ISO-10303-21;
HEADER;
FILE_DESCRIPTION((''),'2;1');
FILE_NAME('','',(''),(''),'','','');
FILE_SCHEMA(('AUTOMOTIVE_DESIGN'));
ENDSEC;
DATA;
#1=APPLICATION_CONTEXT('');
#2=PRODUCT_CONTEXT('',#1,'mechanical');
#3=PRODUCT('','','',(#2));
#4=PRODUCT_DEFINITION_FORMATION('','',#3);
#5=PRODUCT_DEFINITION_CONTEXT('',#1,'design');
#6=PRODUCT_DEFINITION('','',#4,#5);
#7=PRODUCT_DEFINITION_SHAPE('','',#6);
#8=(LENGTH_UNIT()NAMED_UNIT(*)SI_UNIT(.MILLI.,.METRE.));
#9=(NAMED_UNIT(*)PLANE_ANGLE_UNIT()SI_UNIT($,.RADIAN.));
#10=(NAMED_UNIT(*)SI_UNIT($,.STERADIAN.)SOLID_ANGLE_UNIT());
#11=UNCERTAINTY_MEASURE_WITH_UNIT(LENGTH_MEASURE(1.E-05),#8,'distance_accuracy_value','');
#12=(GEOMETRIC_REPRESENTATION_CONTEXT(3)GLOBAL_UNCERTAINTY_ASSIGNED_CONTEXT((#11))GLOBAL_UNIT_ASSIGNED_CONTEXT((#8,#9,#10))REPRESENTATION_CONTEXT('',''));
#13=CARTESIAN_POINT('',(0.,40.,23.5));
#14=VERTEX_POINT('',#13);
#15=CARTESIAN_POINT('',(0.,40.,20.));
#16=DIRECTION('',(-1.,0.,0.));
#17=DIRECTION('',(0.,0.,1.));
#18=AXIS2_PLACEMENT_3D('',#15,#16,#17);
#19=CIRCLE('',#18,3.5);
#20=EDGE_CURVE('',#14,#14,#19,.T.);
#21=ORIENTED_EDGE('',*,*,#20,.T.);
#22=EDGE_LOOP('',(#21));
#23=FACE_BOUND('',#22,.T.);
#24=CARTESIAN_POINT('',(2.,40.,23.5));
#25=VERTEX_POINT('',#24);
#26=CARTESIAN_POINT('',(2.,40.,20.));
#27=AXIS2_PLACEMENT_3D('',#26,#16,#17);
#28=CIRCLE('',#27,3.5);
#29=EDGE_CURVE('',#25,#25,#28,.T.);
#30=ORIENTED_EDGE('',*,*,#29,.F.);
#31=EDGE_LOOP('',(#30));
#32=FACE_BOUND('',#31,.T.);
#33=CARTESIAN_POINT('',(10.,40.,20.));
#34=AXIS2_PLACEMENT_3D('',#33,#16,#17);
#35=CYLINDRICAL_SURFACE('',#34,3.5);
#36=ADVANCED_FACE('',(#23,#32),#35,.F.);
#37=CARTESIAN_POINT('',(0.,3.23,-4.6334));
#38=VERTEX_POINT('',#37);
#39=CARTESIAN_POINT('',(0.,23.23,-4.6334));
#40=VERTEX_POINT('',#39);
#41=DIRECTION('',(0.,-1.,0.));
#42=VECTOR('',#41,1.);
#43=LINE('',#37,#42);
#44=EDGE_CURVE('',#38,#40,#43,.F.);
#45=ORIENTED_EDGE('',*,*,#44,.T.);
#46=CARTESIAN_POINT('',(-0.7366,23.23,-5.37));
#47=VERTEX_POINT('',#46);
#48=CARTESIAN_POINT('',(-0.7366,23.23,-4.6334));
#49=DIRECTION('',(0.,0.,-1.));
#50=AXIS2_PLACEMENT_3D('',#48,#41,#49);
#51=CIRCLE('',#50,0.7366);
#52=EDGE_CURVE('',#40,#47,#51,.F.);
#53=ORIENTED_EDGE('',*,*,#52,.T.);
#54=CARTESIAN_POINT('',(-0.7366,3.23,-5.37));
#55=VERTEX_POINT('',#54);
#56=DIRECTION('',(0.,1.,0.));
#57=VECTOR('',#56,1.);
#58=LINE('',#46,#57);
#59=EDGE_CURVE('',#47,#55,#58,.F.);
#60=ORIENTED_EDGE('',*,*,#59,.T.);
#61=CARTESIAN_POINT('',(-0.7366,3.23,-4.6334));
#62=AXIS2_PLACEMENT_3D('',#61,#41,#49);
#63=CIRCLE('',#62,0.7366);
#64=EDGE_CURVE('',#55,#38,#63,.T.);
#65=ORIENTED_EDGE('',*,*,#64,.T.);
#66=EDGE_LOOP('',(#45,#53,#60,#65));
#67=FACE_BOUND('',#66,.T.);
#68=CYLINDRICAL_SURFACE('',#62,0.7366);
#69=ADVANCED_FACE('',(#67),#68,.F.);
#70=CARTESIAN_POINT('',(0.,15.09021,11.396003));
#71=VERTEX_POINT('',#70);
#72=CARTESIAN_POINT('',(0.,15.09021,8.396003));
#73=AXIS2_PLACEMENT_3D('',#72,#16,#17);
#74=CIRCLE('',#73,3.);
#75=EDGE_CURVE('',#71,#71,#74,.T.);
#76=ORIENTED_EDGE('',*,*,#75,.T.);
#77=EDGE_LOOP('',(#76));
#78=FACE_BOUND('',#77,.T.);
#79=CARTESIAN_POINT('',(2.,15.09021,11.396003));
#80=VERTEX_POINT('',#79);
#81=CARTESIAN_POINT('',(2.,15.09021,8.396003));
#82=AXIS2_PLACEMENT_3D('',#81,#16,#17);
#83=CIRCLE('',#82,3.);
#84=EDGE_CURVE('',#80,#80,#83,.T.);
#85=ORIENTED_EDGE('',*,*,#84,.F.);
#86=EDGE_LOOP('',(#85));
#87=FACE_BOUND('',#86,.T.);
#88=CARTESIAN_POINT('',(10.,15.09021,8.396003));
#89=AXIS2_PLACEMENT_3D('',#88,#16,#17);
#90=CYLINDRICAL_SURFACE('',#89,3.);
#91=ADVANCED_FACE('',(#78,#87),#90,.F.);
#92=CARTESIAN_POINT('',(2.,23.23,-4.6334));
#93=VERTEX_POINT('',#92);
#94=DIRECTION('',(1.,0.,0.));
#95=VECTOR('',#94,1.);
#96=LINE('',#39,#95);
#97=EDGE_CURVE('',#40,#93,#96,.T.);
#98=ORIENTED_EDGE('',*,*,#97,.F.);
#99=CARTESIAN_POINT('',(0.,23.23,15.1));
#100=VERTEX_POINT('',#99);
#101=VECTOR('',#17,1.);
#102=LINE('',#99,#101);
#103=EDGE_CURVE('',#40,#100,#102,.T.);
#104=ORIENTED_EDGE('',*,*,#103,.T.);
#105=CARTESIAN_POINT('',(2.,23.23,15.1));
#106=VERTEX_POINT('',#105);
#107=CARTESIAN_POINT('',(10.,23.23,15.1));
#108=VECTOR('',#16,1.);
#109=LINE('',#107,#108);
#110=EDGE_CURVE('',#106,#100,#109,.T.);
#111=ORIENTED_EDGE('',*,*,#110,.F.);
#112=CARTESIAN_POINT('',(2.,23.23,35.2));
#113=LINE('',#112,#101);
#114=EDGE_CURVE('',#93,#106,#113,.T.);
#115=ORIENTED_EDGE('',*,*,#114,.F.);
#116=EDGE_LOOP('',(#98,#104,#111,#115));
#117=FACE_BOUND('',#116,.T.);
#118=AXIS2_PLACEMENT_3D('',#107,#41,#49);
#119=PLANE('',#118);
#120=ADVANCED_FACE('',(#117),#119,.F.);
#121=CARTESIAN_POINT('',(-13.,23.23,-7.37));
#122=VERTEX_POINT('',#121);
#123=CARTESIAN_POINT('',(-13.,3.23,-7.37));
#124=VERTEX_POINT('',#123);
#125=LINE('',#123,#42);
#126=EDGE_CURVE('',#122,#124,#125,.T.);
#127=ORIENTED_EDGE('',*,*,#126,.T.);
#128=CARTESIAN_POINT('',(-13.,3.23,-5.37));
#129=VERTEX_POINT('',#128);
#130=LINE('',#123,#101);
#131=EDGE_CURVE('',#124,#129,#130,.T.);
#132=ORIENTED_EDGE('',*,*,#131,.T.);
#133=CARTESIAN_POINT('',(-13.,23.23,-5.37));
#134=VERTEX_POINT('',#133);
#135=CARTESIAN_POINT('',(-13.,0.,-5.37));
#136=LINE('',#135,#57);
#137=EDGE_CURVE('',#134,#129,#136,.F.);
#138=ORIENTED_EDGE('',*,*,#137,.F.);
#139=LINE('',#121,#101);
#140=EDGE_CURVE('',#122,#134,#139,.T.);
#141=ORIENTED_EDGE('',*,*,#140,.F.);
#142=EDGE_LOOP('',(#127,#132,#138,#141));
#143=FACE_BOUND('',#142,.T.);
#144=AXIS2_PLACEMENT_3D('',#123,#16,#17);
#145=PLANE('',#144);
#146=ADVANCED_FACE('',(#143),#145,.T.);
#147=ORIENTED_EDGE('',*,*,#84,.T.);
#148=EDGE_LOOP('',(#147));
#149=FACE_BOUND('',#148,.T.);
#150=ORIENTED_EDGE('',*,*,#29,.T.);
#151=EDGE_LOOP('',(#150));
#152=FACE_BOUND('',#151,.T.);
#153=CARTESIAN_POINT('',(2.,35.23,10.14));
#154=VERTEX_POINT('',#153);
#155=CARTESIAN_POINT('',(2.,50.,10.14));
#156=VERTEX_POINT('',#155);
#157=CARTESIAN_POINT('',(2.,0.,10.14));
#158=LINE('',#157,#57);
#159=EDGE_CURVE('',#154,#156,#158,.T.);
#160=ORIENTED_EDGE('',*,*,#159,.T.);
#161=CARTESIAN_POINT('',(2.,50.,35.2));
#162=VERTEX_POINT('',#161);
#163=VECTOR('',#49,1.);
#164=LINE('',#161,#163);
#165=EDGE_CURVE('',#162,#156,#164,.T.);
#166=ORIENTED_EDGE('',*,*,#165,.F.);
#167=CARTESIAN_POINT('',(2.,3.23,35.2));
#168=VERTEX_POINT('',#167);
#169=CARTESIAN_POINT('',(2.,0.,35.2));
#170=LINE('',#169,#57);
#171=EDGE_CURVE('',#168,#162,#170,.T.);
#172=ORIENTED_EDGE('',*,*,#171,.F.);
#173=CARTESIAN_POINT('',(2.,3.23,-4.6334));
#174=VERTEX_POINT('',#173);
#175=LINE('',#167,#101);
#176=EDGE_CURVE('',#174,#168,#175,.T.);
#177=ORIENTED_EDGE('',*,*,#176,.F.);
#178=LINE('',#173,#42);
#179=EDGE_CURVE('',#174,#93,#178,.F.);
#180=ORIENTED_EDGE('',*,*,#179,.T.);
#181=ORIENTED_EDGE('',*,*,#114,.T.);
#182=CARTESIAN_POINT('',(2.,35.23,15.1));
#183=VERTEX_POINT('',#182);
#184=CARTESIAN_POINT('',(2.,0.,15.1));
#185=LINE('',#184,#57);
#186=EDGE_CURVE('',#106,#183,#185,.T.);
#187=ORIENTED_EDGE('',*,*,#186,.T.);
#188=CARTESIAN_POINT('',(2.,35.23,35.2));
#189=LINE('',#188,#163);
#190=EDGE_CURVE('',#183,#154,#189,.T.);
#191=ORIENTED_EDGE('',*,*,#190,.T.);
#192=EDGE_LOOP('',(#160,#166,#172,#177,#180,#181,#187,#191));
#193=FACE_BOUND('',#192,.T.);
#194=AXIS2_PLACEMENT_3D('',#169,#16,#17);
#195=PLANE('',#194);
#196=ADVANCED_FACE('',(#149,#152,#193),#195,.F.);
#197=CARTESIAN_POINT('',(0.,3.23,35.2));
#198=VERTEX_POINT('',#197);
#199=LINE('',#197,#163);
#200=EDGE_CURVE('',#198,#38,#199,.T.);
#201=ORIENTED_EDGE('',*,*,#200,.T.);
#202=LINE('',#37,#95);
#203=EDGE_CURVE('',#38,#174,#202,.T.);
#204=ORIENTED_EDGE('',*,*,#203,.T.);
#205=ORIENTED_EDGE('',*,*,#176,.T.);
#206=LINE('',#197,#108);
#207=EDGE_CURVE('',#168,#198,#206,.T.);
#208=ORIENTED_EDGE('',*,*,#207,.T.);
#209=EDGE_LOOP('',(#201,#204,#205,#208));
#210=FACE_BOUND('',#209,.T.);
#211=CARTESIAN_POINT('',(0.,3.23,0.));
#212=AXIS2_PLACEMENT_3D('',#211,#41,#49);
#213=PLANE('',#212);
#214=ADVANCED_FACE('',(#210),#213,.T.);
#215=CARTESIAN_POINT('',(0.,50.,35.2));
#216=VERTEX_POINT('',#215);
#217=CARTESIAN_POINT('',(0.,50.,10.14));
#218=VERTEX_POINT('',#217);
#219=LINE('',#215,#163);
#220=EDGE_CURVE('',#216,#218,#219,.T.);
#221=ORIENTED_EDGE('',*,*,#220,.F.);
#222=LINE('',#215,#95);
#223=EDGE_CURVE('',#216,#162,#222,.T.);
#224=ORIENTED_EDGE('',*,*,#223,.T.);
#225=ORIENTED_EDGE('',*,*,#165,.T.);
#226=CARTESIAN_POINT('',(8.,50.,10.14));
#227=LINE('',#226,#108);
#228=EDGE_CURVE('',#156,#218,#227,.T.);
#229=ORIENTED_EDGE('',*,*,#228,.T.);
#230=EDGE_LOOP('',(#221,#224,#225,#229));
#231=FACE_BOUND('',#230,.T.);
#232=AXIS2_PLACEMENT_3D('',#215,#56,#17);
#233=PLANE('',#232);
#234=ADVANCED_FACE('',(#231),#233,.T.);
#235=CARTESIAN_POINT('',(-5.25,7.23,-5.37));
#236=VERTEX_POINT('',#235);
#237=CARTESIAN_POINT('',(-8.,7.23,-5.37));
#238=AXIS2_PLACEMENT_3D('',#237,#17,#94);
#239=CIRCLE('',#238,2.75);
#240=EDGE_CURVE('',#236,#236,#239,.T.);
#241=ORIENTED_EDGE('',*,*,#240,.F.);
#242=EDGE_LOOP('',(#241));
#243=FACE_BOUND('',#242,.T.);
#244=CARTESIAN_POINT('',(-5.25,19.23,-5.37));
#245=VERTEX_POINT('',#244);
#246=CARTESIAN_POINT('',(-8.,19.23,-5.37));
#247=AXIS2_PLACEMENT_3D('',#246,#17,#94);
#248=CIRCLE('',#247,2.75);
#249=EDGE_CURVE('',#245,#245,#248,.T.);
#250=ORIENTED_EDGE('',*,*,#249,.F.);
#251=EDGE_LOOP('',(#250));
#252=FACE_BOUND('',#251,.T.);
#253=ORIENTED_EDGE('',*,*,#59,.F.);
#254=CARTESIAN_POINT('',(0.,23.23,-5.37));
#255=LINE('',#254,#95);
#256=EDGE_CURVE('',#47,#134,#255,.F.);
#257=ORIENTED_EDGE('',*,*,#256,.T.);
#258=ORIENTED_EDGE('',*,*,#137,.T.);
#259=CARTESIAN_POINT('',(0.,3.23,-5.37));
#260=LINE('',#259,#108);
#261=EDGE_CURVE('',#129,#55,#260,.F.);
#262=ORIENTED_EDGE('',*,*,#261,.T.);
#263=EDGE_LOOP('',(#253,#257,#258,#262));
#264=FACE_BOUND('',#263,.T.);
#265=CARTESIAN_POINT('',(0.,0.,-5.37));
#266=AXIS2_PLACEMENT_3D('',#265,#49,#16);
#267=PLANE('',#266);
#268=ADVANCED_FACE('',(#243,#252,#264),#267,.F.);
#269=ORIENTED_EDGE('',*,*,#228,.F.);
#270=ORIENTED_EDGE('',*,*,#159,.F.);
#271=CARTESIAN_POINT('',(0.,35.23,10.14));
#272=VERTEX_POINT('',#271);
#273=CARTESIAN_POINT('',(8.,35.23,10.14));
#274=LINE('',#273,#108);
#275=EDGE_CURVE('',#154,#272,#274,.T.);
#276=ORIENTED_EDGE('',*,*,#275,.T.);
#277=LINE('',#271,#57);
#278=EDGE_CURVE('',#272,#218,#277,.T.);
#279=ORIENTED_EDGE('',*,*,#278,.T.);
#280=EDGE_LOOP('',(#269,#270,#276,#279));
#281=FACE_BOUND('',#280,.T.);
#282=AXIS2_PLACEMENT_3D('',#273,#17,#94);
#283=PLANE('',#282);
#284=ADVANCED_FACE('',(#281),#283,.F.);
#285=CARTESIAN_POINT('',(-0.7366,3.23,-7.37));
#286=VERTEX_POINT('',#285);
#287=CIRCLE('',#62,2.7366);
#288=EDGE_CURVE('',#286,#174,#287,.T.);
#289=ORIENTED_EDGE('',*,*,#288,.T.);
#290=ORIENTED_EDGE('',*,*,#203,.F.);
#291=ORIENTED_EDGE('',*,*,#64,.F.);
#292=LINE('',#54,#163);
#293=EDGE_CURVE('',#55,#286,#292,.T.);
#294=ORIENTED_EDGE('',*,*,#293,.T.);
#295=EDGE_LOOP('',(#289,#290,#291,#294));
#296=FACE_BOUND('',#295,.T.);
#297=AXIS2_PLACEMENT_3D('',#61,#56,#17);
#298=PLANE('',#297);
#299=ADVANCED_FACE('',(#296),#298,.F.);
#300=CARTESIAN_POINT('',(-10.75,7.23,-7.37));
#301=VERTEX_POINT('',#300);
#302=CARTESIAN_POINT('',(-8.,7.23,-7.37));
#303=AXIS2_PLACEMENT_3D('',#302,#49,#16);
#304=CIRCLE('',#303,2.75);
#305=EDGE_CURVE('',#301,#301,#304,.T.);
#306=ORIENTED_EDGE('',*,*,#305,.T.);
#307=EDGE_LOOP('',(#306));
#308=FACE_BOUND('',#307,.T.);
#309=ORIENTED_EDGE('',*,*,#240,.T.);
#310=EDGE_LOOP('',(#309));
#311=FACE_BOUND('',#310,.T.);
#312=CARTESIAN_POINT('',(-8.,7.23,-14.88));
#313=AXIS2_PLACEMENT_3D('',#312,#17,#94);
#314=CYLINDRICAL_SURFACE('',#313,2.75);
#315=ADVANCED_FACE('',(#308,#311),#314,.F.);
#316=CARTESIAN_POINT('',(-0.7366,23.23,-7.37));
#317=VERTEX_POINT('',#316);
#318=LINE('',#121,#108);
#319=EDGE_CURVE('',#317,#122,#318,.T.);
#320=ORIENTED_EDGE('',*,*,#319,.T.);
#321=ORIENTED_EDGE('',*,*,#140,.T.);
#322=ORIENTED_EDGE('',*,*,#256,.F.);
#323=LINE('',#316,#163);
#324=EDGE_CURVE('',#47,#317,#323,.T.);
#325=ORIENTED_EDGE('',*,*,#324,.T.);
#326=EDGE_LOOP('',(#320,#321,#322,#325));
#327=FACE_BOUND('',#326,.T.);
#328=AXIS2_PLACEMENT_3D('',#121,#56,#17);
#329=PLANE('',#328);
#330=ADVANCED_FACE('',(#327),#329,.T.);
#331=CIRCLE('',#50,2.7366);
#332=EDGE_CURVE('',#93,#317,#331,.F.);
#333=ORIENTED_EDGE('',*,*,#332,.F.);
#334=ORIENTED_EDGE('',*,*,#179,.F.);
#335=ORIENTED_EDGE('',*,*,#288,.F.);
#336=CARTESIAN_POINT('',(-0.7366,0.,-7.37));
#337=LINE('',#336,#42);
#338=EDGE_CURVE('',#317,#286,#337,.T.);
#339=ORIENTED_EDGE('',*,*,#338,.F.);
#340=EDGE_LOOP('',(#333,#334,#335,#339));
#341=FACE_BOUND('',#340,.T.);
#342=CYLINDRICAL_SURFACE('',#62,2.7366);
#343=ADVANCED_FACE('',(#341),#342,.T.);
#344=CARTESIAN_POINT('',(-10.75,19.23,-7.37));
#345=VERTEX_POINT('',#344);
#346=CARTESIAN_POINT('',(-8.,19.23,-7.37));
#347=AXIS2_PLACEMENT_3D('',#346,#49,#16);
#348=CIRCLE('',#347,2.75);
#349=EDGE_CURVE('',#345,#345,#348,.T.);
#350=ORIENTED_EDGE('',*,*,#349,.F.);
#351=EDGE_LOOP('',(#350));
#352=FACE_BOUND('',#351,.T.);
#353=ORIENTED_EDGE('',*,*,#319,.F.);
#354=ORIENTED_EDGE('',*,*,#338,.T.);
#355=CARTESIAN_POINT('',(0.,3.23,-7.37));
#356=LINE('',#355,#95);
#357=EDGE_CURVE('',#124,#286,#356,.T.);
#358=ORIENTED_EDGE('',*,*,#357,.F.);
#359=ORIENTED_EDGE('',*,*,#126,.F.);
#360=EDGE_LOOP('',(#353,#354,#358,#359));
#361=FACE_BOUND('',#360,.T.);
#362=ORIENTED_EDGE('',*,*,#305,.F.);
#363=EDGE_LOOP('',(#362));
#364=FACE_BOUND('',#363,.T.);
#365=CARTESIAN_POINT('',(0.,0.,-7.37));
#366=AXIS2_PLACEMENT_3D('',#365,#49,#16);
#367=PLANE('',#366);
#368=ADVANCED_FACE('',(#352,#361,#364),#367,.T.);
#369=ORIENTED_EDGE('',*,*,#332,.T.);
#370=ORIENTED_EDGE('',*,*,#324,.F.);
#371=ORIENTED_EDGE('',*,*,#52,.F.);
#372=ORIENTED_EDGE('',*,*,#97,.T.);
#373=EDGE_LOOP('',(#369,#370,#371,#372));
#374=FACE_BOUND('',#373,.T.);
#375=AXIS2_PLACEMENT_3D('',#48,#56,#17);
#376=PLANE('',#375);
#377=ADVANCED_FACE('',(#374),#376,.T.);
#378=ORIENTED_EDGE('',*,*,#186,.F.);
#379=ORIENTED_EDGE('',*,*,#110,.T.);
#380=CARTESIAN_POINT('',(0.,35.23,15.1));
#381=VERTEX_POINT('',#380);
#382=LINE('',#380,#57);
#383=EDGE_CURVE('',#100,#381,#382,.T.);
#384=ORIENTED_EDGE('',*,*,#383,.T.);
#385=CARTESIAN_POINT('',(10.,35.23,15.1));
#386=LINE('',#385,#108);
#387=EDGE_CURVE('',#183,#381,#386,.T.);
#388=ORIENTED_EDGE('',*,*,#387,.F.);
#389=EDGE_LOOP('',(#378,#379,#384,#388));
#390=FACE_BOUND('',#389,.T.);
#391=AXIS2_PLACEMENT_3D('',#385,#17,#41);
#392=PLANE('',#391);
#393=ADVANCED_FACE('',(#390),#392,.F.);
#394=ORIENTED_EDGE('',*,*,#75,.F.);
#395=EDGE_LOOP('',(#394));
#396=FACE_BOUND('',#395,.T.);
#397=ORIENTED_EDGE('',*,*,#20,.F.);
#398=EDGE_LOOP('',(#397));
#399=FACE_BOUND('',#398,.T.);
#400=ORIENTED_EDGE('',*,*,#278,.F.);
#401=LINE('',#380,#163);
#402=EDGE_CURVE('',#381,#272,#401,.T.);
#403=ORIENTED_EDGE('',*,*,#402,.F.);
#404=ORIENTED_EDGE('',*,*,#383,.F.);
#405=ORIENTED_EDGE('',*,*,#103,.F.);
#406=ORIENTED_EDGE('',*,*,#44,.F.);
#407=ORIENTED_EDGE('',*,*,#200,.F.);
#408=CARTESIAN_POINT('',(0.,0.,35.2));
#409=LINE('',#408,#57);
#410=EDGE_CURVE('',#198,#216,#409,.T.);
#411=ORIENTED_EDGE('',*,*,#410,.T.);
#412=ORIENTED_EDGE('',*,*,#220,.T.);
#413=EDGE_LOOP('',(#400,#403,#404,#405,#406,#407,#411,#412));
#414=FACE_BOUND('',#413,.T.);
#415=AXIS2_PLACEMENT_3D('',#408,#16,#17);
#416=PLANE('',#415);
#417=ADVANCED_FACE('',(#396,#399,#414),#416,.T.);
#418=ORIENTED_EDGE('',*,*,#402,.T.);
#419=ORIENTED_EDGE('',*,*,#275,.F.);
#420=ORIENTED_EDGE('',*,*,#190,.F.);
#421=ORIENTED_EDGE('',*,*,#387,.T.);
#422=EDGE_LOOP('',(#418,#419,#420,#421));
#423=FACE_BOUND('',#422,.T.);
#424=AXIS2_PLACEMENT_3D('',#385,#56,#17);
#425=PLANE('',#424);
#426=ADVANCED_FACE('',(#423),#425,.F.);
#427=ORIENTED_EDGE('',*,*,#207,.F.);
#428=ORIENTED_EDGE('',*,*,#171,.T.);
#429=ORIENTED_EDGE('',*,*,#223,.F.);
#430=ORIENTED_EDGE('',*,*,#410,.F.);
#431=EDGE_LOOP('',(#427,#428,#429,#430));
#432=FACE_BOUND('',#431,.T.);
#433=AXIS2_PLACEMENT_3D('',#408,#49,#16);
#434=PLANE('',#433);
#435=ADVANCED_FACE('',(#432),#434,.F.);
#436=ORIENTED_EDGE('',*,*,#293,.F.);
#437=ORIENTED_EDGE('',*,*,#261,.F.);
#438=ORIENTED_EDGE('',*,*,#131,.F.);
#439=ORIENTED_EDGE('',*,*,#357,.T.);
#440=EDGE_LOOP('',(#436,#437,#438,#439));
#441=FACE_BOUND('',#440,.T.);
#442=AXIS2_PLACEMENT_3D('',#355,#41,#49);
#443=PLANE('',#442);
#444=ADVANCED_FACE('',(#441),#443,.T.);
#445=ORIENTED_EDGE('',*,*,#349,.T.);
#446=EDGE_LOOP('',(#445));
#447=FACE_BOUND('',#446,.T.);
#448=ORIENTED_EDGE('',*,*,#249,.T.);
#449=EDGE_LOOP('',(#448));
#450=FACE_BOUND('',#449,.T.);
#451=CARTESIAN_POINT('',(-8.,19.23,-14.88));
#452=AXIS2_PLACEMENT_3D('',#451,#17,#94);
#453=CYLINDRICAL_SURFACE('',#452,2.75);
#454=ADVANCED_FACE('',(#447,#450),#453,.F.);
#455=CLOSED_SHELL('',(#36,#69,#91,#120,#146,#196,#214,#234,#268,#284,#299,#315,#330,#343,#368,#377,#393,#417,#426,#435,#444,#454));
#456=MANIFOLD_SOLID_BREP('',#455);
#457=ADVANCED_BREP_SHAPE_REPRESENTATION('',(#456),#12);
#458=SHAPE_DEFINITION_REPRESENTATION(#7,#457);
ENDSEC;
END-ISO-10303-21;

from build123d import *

# Parameters (mm, degrees)
SKETCH_1_W                       = 2
SKETCH_1_H                       = 50
SM_BASE_FLANGE_1_DEPTH           = 35.2
SKETCH_7_W                       = 16.759406963
SKETCH_7_H                       = 59.520719971
CUT_EXTRUDE_2_DEPTH              = 4.8
SKETCH_9_W                       = 8.068883198
SKETCH_9_H                       = 35.697926428
CUT_EXTRUDE_3_DEPTH              = 3.23
SKETCH_6_R                       = 3.5
CUT_EXTRUDE_5_DEPTH              = 10
SKETCH_15_W                      = 15.322876818
SKETCH_15_H                      = 12
CUT_EXTRUDE_7_DEPTH              = 10
SKETCH_18_R                      = 3
CUT_EXTRUDE_8_DEPTH              = 10
SKETCH_19_W                      = 2
SKETCH_19_H                      = 14.77
SKETCH_19_H_2                    = 20
EXTRUDE_1_DEPTH                  = 2.66
SKETCH_20_W                      = 8
SKETCH_20_H                      = 14.77
CUT_EXTRUDE_9_DEPTH              = 8
SKETCH_21_W                      = 2
SKETCH_21_H                      = 20
EXTRUDE_2_DEPTH                  = 9.51
SM_EDGE_FLANGE_1_STRIP_W         = 9.4732
SM_EDGE_FLANGE_1_STRIP_H         = 2
SM_EDGE_FLANGE_1_STRIP_CUT_DEPTH = 20
SM_EDGE_FLANGE_1_DEPTH           = 20
SKETCH_27_R                      = 2.75
CUT_EXTRUDE_10_DEPTH             = 9.51


# Sheet-metal steps are written as plain solids
with BuildPart() as part:
    # Sketch 1 → 基体-法兰1 (new body)
    with BuildSketch(Plane.XY):
        with Locations((1, 25)):
            Rectangle(SKETCH_1_W, SKETCH_1_H)
    extrude(amount=SM_BASE_FLANGE_1_DEPTH)

    # 草图7 → 切除-拉伸2 (cut)
    with BuildSketch(Plane(origin=(0, 0, 0), x_dir=(-1, 0, 0), z_dir=(0, 0, -1))):
        with Locations((6.379703482, 29.760359986)):
            Rectangle(SKETCH_7_W, SKETCH_7_H)
    extrude(amount=-CUT_EXTRUDE_2_DEPTH, mode=Mode.SUBTRACT)

    # 草图9 → 切除-拉伸3 (cut)
    with BuildSketch(Plane.XZ):
        with Locations((4.034441599, 17.351036786)):
            Rectangle(SKETCH_9_W, SKETCH_9_H)
    extrude(amount=-CUT_EXTRUDE_3_DEPTH, mode=Mode.SUBTRACT)

    # 草图6 → 切除-拉伸5 (cut)
    with BuildSketch(Plane.ZY):
        with Locations((20, 40)):
            Circle(SKETCH_6_R)
    extrude(amount=-CUT_EXTRUDE_5_DEPTH, mode=Mode.SUBTRACT)

    # 草图15 → 切除-拉伸7 (cut)
    with BuildSketch(Plane.ZY):
        with Locations((7.438561591, 29.23)):
            Rectangle(SKETCH_15_W, SKETCH_15_H)
    extrude(amount=-CUT_EXTRUDE_7_DEPTH, mode=Mode.SUBTRACT)

    # 草图18 → 切除-拉伸8 (cut)
    with BuildSketch(Plane.ZY):
        with Locations((8.3960026, 15.09020987)):
            Circle(SKETCH_18_R)
    extrude(amount=-CUT_EXTRUDE_8_DEPTH, mode=Mode.SUBTRACT)

    # 草图19 → 凸台-拉伸1 (add)
    with BuildSketch(Plane(origin=(0, 0, 4.8), x_dir=(-1, 0, 0), z_dir=(0, 0, -1))):
        with Locations((-1, 42.615)):
            Rectangle(SKETCH_19_W, SKETCH_19_H)
        with Locations((-1, 13.23)):
            Rectangle(SKETCH_19_W, SKETCH_19_H_2)
    extrude(amount=EXTRUDE_1_DEPTH)

    # 草图20 → 切除-拉伸9 (cut)
    with BuildSketch(Plane.ZY):
        with Locations((6.14, 42.615)):
            Rectangle(SKETCH_20_W, SKETCH_20_H)
    extrude(amount=-CUT_EXTRUDE_9_DEPTH, mode=Mode.SUBTRACT)

    # 草图21 → 凸台-拉伸2 (add)
    with BuildSketch(Plane(origin=(0, 0, 2.14), x_dir=(-1, 0, 0), z_dir=(0, 0, -1))):
        with Locations((-1, 13.23)):
            Rectangle(SKETCH_21_W, SKETCH_21_H)
    extrude(amount=EXTRUDE_2_DEPTH)

    # 边线-法兰1 strip (across the edge) → 边线-法兰1 strip cut (cut)
    with BuildSketch(Plane(origin=(0, 23.23, -7.37), x_dir=(0, 0, 1), z_dir=(0, -1, 0))):
        with Locations((-2, -1)):
            Rectangle(SM_EDGE_FLANGE_1_STRIP_W, SM_EDGE_FLANGE_1_STRIP_H)
    extrude(amount=SM_EDGE_FLANGE_1_STRIP_CUT_DEPTH, mode=Mode.SUBTRACT)

    # 边线-法兰1 section (across the edge) → 边线-法兰1 (add)
    with BuildSketch(Plane(origin=(0, 23.23, -7.37), x_dir=(0, 0, 1), z_dir=(0, -1, 0))):
        with BuildLine():
            Line((0, 0.7366), (0, 13))
            Line((0, 13), (2, 13))
            Line((2, 13), (2, 0.7366))
            ThreePointArc((2, 0.7366), (2.215745145, 0.215745145), (2.7366, 0))
            Line((2.7366, 0), (2.7366, -2))
            ThreePointArc((2.7366, -2), (0.801531583, -1.198468417), (0, 0.7366))
        make_face()
    extrude(amount=SM_EDGE_FLANGE_1_DEPTH)

    # 草图27 → 切除-拉伸10 (cut)
    with BuildSketch(Plane.XY.offset(-5.37)):
        with Locations((-8, 19.23)):
            Circle(SKETCH_27_R)
        with Locations((-8, 7.23)):
            Circle(SKETCH_27_R)
    extrude(amount=-CUT_EXTRUDE_10_DEPTH, mode=Mode.SUBTRACT)


solid = part.part
